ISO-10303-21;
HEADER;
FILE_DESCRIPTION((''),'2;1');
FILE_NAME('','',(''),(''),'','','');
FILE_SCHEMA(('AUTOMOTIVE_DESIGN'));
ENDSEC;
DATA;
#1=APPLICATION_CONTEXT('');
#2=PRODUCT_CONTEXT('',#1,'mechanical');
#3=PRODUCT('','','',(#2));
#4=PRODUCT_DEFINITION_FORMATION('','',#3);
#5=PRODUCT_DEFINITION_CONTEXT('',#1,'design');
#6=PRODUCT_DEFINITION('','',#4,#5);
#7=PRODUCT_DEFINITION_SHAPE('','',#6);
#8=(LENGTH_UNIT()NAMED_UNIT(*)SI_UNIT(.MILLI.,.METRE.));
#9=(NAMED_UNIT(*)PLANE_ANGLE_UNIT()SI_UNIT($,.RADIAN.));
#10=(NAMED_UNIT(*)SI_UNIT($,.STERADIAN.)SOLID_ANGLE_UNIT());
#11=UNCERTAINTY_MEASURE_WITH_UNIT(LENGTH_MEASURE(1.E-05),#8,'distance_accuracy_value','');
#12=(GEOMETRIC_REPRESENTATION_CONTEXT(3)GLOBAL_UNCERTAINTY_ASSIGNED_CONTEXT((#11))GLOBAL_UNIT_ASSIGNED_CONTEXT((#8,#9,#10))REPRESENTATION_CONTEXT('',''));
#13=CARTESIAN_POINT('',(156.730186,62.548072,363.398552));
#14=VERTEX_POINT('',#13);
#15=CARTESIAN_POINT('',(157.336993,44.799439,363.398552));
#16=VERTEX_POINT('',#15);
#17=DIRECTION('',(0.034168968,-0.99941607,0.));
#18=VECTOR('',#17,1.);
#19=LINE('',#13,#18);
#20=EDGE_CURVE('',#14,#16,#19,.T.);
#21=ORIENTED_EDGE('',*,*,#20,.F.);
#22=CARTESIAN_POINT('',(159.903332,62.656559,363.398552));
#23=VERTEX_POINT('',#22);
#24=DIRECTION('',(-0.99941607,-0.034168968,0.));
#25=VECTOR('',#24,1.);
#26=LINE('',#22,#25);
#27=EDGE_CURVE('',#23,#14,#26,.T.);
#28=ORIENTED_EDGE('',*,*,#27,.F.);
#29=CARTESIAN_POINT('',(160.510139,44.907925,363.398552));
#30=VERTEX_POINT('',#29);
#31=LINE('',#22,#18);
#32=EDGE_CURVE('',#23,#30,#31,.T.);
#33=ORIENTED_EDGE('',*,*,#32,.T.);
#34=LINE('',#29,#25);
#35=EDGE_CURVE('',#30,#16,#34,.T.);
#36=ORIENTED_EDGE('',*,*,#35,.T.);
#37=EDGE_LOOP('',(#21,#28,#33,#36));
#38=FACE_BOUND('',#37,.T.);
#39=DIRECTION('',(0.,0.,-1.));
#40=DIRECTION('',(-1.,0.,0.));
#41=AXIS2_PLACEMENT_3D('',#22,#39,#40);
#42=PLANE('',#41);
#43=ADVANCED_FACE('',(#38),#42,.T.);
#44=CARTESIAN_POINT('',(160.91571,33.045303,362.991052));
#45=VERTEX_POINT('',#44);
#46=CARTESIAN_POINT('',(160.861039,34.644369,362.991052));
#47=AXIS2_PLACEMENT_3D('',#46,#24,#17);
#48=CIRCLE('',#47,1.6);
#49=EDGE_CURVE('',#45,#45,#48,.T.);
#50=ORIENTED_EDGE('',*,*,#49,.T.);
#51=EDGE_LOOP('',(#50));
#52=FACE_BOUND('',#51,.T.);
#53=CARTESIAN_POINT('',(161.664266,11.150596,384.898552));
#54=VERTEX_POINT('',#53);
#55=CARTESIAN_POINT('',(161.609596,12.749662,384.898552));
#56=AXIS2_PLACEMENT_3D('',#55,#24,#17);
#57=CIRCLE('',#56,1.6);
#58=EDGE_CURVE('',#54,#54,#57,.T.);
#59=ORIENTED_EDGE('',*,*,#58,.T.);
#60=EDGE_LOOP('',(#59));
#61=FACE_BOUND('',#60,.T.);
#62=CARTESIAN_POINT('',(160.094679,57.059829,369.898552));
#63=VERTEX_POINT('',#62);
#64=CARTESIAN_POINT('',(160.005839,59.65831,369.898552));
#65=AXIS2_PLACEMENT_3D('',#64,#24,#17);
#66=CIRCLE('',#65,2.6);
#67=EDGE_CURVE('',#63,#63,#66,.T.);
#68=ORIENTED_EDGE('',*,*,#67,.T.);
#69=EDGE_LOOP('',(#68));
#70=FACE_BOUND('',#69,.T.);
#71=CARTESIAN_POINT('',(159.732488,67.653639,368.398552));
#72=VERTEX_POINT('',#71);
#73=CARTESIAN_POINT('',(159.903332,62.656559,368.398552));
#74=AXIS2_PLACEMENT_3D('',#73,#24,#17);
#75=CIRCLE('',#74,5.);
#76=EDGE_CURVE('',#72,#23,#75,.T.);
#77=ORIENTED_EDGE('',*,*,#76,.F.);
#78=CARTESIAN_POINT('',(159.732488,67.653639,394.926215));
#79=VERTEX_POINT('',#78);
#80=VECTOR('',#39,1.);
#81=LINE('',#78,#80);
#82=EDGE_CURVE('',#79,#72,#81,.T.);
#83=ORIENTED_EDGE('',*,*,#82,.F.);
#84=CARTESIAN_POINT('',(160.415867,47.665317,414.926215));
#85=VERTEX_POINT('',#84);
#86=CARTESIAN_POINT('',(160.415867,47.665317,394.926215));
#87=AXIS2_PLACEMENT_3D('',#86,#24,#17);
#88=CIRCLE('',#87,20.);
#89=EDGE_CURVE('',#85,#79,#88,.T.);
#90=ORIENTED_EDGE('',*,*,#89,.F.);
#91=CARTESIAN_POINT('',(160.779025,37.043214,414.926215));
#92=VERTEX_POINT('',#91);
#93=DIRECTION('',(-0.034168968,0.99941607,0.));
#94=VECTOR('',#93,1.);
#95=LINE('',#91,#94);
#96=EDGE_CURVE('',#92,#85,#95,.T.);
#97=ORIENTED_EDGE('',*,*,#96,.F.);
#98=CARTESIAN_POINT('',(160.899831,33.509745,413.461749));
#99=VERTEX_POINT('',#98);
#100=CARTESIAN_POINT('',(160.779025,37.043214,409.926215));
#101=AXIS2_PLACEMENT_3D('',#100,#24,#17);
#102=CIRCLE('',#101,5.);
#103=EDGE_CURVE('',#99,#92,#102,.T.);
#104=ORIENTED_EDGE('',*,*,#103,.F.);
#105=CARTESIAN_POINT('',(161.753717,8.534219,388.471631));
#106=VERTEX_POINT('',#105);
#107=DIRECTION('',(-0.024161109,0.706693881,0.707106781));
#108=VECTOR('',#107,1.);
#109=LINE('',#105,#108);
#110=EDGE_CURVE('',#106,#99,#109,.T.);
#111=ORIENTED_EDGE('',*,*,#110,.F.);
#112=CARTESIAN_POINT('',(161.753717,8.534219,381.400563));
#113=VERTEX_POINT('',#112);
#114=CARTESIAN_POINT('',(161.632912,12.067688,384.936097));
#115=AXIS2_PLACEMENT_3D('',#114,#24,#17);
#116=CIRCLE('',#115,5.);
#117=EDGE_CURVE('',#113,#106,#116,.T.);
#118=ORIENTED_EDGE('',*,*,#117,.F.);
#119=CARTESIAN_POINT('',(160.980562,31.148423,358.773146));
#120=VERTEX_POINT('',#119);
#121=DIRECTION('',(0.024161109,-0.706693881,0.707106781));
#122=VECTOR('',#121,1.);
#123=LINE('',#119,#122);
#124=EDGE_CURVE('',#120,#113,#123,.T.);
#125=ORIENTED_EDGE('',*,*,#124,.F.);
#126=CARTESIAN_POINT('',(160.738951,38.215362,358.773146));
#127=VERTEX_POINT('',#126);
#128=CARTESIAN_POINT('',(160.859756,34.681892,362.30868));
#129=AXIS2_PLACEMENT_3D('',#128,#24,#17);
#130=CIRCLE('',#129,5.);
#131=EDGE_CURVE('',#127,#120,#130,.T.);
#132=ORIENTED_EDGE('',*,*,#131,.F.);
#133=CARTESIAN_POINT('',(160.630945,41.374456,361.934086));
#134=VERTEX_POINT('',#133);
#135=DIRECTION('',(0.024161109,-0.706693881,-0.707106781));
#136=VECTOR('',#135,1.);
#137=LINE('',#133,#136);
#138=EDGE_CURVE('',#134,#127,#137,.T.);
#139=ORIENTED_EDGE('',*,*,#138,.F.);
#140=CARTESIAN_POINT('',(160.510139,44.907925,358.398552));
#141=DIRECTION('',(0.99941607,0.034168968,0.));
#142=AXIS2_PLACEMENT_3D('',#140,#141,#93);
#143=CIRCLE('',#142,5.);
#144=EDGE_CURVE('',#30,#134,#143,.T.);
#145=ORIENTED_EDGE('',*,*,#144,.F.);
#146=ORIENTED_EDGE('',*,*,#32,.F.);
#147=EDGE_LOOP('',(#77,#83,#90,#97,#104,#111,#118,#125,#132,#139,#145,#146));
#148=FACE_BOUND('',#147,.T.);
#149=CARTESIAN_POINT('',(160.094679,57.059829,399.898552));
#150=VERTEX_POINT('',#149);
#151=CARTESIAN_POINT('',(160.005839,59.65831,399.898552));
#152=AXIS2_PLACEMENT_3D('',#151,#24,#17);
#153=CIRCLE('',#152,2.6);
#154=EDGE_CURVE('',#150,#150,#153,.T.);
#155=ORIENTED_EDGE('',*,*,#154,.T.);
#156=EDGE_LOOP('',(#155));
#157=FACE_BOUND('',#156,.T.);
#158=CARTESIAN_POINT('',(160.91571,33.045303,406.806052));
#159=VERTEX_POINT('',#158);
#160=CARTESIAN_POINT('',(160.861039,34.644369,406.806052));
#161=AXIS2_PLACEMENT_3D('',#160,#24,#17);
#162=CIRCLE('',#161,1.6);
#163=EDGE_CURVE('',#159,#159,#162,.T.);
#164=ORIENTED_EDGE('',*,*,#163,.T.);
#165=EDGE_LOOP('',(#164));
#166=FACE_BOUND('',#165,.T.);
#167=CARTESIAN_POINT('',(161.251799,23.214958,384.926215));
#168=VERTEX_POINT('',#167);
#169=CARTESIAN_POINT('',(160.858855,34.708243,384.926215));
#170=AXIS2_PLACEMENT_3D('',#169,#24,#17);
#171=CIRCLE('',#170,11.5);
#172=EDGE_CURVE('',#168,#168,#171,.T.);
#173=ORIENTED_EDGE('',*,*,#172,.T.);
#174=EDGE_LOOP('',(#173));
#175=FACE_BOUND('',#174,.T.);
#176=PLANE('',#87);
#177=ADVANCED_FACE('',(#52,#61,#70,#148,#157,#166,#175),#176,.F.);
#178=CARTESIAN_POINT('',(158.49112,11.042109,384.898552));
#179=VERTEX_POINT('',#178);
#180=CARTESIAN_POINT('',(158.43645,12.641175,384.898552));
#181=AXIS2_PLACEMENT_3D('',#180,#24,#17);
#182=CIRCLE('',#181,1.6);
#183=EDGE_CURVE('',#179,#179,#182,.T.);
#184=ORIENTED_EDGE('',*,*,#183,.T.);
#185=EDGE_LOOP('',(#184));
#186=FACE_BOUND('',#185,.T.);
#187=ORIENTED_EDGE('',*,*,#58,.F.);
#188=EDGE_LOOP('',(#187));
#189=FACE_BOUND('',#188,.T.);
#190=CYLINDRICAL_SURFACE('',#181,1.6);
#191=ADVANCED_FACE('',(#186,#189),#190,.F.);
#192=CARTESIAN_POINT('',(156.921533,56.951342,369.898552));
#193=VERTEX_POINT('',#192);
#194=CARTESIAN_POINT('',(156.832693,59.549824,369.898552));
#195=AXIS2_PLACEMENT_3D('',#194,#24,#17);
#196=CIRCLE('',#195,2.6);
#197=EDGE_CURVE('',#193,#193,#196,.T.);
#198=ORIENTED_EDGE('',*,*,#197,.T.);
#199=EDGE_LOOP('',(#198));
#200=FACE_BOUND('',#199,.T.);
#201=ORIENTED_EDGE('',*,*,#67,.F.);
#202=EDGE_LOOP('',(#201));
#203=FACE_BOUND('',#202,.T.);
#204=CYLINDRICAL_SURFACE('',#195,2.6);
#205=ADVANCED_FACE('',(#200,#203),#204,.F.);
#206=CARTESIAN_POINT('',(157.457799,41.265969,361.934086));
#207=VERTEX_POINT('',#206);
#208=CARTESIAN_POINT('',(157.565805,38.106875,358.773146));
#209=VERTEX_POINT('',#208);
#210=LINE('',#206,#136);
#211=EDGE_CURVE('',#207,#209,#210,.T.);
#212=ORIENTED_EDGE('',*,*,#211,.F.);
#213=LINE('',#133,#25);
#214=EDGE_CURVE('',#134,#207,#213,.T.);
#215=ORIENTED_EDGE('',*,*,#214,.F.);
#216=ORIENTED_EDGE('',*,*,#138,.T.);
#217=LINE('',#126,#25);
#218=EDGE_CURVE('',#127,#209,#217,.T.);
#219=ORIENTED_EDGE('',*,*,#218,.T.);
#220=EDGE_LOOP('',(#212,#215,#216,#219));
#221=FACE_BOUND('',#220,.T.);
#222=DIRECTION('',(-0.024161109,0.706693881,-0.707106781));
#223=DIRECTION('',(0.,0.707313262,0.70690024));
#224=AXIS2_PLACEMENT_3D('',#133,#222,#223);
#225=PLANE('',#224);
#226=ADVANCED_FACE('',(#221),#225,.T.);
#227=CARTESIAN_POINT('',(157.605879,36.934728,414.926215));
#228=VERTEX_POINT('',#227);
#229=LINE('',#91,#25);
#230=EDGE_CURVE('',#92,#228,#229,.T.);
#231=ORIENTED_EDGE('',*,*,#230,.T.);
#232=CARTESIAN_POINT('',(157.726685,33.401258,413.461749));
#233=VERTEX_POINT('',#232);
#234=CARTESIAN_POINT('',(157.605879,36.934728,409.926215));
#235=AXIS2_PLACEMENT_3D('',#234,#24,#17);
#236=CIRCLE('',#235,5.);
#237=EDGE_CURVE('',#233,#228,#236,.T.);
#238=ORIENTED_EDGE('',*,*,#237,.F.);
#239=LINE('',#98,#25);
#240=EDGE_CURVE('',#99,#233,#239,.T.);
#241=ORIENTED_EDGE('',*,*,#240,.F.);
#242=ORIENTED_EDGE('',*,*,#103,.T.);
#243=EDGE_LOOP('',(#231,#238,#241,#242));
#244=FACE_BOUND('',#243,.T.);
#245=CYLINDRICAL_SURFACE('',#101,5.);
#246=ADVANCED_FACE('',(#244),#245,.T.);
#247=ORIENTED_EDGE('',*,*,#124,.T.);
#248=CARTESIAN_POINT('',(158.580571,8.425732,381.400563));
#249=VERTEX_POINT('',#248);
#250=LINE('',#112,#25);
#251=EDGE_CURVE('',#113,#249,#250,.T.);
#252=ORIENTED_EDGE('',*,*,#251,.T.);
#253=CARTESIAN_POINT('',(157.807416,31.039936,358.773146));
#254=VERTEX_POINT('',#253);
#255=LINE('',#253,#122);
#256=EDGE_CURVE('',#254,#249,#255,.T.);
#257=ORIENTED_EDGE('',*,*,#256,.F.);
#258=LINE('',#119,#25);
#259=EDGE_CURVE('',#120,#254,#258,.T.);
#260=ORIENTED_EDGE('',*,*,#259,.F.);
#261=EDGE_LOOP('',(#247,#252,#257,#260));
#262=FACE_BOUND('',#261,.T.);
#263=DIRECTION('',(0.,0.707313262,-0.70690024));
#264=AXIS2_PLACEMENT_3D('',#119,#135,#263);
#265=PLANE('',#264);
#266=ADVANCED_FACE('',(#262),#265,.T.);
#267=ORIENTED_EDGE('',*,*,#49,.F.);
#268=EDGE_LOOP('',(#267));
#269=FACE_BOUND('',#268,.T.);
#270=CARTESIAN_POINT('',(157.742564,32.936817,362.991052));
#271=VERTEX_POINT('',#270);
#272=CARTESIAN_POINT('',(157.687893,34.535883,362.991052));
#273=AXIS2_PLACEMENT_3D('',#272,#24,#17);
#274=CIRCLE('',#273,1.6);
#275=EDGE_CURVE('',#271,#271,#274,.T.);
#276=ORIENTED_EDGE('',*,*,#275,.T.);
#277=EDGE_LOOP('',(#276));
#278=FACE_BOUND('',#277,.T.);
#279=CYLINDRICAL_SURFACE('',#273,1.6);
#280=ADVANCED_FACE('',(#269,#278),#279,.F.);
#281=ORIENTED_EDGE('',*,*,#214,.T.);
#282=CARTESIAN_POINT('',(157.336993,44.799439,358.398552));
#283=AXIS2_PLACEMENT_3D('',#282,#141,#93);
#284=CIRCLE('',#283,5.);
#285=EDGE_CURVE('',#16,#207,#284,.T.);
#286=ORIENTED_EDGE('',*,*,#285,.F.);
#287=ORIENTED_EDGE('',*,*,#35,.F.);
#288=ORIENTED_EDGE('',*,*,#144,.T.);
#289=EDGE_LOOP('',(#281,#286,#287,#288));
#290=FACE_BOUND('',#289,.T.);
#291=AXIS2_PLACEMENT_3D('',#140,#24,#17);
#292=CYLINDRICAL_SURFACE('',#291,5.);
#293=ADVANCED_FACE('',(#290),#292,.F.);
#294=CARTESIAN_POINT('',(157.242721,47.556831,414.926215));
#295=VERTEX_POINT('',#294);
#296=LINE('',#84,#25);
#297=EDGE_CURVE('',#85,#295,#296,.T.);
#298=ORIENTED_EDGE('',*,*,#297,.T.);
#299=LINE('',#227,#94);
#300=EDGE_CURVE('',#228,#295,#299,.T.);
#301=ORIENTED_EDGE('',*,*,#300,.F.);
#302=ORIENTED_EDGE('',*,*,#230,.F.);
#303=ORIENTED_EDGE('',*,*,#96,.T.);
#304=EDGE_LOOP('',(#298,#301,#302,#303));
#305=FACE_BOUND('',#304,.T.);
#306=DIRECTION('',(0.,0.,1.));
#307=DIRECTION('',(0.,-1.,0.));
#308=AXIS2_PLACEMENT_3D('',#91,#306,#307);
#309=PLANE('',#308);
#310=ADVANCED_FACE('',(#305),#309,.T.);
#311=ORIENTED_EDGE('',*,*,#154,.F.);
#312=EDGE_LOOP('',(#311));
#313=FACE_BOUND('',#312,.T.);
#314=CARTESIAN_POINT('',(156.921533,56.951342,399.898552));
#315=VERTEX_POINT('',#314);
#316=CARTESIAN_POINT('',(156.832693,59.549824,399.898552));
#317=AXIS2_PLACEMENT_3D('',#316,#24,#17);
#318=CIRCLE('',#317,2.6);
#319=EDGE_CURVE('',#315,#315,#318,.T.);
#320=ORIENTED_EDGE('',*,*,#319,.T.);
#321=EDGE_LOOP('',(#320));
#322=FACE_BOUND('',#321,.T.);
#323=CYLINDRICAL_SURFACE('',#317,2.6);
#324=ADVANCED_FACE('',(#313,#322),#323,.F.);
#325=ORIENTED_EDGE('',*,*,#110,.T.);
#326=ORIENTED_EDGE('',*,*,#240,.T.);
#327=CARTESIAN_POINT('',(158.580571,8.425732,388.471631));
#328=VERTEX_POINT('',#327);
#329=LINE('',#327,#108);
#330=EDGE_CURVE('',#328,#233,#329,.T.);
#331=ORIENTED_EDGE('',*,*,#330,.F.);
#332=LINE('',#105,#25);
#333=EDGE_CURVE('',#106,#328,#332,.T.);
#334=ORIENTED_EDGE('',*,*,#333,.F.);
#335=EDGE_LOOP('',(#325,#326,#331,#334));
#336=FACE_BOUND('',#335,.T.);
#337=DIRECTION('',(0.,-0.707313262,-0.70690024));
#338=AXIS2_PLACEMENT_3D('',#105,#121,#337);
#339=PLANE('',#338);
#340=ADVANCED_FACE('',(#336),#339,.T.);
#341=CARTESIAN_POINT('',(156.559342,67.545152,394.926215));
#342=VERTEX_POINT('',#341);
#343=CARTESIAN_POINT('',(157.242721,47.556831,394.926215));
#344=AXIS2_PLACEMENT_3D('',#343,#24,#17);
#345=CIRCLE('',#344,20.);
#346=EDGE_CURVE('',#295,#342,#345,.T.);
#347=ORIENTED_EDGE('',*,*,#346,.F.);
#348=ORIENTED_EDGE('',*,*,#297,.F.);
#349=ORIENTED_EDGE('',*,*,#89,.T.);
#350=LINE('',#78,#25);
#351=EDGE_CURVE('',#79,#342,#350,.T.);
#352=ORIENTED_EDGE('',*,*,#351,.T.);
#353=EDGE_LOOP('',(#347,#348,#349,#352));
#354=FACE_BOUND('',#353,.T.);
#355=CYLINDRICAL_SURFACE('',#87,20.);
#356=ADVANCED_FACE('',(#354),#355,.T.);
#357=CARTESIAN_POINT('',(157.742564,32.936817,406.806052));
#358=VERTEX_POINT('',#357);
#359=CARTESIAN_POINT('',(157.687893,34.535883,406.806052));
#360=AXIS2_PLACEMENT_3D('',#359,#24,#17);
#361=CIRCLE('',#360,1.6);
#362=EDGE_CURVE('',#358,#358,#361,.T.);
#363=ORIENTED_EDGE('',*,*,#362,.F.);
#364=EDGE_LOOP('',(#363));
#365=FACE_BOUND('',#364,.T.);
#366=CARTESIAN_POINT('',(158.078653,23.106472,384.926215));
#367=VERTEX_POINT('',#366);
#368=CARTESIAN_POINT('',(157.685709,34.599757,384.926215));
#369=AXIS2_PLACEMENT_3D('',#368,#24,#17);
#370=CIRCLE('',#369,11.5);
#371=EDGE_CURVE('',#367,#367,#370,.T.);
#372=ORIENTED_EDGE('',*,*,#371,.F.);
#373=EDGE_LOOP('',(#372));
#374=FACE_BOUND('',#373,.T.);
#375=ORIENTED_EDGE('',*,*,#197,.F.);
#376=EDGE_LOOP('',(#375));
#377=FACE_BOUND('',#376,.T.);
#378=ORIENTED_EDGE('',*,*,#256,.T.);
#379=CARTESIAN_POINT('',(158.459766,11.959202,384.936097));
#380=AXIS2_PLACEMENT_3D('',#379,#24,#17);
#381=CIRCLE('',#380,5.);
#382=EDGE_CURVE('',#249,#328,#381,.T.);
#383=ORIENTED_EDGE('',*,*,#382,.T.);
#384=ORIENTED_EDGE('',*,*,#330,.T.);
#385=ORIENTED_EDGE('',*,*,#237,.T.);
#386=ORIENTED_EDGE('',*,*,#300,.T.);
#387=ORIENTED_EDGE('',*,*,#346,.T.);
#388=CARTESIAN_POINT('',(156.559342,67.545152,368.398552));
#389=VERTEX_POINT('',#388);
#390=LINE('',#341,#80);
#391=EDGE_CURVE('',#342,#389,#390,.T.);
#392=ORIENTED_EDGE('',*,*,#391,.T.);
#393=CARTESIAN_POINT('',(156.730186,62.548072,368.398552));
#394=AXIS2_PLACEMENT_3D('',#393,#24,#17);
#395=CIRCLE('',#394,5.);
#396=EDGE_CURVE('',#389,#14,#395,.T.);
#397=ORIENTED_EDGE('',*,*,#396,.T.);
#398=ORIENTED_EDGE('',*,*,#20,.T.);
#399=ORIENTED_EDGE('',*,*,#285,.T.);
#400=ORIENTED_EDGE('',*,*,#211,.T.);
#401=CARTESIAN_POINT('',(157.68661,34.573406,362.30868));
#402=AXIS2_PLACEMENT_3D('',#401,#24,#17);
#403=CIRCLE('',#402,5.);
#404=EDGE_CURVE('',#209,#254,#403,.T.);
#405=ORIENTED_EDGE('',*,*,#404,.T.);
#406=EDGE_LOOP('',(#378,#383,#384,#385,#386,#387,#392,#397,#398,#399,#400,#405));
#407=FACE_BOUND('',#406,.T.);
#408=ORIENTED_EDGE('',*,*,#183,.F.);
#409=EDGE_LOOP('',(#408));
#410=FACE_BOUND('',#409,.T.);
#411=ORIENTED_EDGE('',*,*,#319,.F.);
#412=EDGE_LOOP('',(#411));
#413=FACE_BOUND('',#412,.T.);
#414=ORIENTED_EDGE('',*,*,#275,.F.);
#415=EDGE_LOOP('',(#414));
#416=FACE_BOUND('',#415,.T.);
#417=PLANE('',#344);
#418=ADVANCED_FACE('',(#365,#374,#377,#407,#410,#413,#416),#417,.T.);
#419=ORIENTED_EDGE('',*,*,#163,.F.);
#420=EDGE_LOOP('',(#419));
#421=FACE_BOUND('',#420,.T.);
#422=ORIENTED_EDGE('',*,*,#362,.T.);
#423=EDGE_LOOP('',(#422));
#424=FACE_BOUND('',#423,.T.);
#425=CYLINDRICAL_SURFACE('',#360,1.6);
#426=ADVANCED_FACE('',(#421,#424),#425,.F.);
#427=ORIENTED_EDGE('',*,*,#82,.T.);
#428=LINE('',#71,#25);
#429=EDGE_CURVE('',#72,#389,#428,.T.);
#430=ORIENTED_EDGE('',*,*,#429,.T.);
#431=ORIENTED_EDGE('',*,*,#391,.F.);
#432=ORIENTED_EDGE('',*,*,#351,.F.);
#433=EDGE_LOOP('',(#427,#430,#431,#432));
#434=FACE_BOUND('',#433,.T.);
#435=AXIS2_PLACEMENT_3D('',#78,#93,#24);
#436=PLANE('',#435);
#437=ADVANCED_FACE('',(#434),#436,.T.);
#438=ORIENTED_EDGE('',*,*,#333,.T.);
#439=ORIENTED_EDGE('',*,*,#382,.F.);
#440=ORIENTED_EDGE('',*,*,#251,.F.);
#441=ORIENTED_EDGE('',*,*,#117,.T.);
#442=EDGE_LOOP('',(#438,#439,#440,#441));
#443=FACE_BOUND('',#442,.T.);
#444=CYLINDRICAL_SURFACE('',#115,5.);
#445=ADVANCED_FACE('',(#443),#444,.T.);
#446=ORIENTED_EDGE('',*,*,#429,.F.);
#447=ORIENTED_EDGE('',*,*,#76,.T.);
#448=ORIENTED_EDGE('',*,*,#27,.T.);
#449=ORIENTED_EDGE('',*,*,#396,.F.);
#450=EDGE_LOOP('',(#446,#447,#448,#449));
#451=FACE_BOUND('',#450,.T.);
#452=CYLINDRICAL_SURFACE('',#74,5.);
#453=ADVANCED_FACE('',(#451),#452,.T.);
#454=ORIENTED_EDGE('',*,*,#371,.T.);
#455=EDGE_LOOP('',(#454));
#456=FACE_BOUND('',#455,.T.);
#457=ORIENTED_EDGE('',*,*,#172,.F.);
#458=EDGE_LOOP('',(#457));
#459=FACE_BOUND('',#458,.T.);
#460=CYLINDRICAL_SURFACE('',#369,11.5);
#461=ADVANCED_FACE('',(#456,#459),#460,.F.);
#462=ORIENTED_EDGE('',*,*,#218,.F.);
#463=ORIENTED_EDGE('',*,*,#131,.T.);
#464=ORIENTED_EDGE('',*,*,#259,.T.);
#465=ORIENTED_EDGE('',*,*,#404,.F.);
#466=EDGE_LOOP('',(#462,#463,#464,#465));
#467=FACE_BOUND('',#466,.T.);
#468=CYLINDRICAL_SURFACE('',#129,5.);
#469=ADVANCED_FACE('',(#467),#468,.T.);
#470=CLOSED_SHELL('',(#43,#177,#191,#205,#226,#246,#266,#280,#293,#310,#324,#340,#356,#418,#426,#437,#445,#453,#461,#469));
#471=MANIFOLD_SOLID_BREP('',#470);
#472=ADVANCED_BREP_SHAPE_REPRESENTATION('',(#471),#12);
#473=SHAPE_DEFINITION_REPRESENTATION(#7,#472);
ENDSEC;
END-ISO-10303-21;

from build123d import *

# Parameters (mm, degrees)
BASE_FLANGE1_DEPTH             = 3.175
F_23_0_23_DIAMETER_HOLE1_D     = 23
F_23_0_23_DIAMETER_HOLE1_DEPTH = 5.245059642
F_5_2_5_2_DIAMETER_HOLE1_D     = 5.2
F_5_2_5_2_DIAMETER_HOLE1_DEPTH = 5.245059642
F_3_2_3_2_DIAMETER_HOLE1_D     = 3.2
F_3_2_3_2_DIAMETER_HOLE1_DEPTH = 5.245059642


# Sheet-metal steps are written as plain solids
with BuildPart() as part:
    # Sketch11 → Base-Flange1 (new body)
    with BuildSketch(Plane(origin=(158.683156088, 5.425207604, 0), x_dir=(0.03416896788300158, -0.9994160703299755, 0), z_dir=(-0.9994160703299755, -0.03416896788300158, -1.3885688057658037e-15))):
        with BuildLine():
            Line((-62.15623968, 394.926215189), (-62.15623968, 368.398551724))
            ThreePointArc((-62.15623968, 368.398551724), (-60.691773586, 364.863017818), (-57.15623968, 363.398551724))
            Line((-57.15623968, 363.398551724), (-39.397236161, 363.398551724))
            ThreePointArc((-39.397236161, 363.398551724), (-37.483818999, 363.017949386), (-35.861702255, 361.93408563))
            Line((-35.861702255, 361.93408563), (-32.700762633, 358.773146007))
            ThreePointArc((-32.700762633, 358.773146007), (-29.165228727, 357.308679913), (-25.629694821, 358.773146007))
            Line((-25.629694821, 358.773146007), (-3.002277823, 381.400563005))
            ThreePointArc((-3.002277823, 381.400563005), (-1.537811729, 384.936096911), (-3.002277823, 388.471630817))
            Line((-3.002277823, 388.471630817), (-27.992396101, 413.461749095))
            ThreePointArc((-27.992396101, 413.461749095), (-29.614512845, 414.545612852), (-31.527930007, 414.926215189))
            Line((-31.527930007, 414.926215189), (-42.15623968, 414.926215189))
            ThreePointArc((-42.15623968, 414.926215189), (-56.298375303, 409.068350813), (-62.15623968, 394.926215189))
        make_face()
    extrude(amount=-BASE_FLANGE1_DEPTH)

    # Ø23.0 (23) Diameter Hole1
    with Locations(Plane(origin=(158.683156088, 5.425207604, 0), x_dir=(0, 0, 1), z_dir=(-0.9994160703299755, -0.03416896788300158, -1.3885688057658039e-15))):
        with Locations((384.926215189, 29.191594771)):
            Hole(F_23_0_23_DIAMETER_HOLE1_D / 2, depth=F_23_0_23_DIAMETER_HOLE1_DEPTH)

    # Ø5.2 (5.2) Diameter Hole1
    with Locations(Plane(origin=(158.683156088, 5.425207604, 0), x_dir=(0, 0, 1), z_dir=(-0.9994160703299755, -0.03416896788300158, -1.3885688057658039e-15))):
        with Locations((369.898551724, 54.15623968), (399.898551724, 54.15623968)):
            Hole(F_5_2_5_2_DIAMETER_HOLE1_D / 2, depth=F_5_2_5_2_DIAMETER_HOLE1_DEPTH)

    # Ø3.2 (3.2) Diameter Hole1
    with Locations(Plane(origin=(158.683156088, 5.425207604, 0), x_dir=(0, 0, 1), z_dir=(-0.9994160703299755, -0.03416896788300158, -1.3885688057658039e-15))):
        with Locations((406.806051724, 29.127683539), (362.991051724, 29.127683539), (384.898551724, 7.220183539)):
            Hole(F_3_2_3_2_DIAMETER_HOLE1_D / 2, depth=F_3_2_3_2_DIAMETER_HOLE1_DEPTH)


solid = part.part
